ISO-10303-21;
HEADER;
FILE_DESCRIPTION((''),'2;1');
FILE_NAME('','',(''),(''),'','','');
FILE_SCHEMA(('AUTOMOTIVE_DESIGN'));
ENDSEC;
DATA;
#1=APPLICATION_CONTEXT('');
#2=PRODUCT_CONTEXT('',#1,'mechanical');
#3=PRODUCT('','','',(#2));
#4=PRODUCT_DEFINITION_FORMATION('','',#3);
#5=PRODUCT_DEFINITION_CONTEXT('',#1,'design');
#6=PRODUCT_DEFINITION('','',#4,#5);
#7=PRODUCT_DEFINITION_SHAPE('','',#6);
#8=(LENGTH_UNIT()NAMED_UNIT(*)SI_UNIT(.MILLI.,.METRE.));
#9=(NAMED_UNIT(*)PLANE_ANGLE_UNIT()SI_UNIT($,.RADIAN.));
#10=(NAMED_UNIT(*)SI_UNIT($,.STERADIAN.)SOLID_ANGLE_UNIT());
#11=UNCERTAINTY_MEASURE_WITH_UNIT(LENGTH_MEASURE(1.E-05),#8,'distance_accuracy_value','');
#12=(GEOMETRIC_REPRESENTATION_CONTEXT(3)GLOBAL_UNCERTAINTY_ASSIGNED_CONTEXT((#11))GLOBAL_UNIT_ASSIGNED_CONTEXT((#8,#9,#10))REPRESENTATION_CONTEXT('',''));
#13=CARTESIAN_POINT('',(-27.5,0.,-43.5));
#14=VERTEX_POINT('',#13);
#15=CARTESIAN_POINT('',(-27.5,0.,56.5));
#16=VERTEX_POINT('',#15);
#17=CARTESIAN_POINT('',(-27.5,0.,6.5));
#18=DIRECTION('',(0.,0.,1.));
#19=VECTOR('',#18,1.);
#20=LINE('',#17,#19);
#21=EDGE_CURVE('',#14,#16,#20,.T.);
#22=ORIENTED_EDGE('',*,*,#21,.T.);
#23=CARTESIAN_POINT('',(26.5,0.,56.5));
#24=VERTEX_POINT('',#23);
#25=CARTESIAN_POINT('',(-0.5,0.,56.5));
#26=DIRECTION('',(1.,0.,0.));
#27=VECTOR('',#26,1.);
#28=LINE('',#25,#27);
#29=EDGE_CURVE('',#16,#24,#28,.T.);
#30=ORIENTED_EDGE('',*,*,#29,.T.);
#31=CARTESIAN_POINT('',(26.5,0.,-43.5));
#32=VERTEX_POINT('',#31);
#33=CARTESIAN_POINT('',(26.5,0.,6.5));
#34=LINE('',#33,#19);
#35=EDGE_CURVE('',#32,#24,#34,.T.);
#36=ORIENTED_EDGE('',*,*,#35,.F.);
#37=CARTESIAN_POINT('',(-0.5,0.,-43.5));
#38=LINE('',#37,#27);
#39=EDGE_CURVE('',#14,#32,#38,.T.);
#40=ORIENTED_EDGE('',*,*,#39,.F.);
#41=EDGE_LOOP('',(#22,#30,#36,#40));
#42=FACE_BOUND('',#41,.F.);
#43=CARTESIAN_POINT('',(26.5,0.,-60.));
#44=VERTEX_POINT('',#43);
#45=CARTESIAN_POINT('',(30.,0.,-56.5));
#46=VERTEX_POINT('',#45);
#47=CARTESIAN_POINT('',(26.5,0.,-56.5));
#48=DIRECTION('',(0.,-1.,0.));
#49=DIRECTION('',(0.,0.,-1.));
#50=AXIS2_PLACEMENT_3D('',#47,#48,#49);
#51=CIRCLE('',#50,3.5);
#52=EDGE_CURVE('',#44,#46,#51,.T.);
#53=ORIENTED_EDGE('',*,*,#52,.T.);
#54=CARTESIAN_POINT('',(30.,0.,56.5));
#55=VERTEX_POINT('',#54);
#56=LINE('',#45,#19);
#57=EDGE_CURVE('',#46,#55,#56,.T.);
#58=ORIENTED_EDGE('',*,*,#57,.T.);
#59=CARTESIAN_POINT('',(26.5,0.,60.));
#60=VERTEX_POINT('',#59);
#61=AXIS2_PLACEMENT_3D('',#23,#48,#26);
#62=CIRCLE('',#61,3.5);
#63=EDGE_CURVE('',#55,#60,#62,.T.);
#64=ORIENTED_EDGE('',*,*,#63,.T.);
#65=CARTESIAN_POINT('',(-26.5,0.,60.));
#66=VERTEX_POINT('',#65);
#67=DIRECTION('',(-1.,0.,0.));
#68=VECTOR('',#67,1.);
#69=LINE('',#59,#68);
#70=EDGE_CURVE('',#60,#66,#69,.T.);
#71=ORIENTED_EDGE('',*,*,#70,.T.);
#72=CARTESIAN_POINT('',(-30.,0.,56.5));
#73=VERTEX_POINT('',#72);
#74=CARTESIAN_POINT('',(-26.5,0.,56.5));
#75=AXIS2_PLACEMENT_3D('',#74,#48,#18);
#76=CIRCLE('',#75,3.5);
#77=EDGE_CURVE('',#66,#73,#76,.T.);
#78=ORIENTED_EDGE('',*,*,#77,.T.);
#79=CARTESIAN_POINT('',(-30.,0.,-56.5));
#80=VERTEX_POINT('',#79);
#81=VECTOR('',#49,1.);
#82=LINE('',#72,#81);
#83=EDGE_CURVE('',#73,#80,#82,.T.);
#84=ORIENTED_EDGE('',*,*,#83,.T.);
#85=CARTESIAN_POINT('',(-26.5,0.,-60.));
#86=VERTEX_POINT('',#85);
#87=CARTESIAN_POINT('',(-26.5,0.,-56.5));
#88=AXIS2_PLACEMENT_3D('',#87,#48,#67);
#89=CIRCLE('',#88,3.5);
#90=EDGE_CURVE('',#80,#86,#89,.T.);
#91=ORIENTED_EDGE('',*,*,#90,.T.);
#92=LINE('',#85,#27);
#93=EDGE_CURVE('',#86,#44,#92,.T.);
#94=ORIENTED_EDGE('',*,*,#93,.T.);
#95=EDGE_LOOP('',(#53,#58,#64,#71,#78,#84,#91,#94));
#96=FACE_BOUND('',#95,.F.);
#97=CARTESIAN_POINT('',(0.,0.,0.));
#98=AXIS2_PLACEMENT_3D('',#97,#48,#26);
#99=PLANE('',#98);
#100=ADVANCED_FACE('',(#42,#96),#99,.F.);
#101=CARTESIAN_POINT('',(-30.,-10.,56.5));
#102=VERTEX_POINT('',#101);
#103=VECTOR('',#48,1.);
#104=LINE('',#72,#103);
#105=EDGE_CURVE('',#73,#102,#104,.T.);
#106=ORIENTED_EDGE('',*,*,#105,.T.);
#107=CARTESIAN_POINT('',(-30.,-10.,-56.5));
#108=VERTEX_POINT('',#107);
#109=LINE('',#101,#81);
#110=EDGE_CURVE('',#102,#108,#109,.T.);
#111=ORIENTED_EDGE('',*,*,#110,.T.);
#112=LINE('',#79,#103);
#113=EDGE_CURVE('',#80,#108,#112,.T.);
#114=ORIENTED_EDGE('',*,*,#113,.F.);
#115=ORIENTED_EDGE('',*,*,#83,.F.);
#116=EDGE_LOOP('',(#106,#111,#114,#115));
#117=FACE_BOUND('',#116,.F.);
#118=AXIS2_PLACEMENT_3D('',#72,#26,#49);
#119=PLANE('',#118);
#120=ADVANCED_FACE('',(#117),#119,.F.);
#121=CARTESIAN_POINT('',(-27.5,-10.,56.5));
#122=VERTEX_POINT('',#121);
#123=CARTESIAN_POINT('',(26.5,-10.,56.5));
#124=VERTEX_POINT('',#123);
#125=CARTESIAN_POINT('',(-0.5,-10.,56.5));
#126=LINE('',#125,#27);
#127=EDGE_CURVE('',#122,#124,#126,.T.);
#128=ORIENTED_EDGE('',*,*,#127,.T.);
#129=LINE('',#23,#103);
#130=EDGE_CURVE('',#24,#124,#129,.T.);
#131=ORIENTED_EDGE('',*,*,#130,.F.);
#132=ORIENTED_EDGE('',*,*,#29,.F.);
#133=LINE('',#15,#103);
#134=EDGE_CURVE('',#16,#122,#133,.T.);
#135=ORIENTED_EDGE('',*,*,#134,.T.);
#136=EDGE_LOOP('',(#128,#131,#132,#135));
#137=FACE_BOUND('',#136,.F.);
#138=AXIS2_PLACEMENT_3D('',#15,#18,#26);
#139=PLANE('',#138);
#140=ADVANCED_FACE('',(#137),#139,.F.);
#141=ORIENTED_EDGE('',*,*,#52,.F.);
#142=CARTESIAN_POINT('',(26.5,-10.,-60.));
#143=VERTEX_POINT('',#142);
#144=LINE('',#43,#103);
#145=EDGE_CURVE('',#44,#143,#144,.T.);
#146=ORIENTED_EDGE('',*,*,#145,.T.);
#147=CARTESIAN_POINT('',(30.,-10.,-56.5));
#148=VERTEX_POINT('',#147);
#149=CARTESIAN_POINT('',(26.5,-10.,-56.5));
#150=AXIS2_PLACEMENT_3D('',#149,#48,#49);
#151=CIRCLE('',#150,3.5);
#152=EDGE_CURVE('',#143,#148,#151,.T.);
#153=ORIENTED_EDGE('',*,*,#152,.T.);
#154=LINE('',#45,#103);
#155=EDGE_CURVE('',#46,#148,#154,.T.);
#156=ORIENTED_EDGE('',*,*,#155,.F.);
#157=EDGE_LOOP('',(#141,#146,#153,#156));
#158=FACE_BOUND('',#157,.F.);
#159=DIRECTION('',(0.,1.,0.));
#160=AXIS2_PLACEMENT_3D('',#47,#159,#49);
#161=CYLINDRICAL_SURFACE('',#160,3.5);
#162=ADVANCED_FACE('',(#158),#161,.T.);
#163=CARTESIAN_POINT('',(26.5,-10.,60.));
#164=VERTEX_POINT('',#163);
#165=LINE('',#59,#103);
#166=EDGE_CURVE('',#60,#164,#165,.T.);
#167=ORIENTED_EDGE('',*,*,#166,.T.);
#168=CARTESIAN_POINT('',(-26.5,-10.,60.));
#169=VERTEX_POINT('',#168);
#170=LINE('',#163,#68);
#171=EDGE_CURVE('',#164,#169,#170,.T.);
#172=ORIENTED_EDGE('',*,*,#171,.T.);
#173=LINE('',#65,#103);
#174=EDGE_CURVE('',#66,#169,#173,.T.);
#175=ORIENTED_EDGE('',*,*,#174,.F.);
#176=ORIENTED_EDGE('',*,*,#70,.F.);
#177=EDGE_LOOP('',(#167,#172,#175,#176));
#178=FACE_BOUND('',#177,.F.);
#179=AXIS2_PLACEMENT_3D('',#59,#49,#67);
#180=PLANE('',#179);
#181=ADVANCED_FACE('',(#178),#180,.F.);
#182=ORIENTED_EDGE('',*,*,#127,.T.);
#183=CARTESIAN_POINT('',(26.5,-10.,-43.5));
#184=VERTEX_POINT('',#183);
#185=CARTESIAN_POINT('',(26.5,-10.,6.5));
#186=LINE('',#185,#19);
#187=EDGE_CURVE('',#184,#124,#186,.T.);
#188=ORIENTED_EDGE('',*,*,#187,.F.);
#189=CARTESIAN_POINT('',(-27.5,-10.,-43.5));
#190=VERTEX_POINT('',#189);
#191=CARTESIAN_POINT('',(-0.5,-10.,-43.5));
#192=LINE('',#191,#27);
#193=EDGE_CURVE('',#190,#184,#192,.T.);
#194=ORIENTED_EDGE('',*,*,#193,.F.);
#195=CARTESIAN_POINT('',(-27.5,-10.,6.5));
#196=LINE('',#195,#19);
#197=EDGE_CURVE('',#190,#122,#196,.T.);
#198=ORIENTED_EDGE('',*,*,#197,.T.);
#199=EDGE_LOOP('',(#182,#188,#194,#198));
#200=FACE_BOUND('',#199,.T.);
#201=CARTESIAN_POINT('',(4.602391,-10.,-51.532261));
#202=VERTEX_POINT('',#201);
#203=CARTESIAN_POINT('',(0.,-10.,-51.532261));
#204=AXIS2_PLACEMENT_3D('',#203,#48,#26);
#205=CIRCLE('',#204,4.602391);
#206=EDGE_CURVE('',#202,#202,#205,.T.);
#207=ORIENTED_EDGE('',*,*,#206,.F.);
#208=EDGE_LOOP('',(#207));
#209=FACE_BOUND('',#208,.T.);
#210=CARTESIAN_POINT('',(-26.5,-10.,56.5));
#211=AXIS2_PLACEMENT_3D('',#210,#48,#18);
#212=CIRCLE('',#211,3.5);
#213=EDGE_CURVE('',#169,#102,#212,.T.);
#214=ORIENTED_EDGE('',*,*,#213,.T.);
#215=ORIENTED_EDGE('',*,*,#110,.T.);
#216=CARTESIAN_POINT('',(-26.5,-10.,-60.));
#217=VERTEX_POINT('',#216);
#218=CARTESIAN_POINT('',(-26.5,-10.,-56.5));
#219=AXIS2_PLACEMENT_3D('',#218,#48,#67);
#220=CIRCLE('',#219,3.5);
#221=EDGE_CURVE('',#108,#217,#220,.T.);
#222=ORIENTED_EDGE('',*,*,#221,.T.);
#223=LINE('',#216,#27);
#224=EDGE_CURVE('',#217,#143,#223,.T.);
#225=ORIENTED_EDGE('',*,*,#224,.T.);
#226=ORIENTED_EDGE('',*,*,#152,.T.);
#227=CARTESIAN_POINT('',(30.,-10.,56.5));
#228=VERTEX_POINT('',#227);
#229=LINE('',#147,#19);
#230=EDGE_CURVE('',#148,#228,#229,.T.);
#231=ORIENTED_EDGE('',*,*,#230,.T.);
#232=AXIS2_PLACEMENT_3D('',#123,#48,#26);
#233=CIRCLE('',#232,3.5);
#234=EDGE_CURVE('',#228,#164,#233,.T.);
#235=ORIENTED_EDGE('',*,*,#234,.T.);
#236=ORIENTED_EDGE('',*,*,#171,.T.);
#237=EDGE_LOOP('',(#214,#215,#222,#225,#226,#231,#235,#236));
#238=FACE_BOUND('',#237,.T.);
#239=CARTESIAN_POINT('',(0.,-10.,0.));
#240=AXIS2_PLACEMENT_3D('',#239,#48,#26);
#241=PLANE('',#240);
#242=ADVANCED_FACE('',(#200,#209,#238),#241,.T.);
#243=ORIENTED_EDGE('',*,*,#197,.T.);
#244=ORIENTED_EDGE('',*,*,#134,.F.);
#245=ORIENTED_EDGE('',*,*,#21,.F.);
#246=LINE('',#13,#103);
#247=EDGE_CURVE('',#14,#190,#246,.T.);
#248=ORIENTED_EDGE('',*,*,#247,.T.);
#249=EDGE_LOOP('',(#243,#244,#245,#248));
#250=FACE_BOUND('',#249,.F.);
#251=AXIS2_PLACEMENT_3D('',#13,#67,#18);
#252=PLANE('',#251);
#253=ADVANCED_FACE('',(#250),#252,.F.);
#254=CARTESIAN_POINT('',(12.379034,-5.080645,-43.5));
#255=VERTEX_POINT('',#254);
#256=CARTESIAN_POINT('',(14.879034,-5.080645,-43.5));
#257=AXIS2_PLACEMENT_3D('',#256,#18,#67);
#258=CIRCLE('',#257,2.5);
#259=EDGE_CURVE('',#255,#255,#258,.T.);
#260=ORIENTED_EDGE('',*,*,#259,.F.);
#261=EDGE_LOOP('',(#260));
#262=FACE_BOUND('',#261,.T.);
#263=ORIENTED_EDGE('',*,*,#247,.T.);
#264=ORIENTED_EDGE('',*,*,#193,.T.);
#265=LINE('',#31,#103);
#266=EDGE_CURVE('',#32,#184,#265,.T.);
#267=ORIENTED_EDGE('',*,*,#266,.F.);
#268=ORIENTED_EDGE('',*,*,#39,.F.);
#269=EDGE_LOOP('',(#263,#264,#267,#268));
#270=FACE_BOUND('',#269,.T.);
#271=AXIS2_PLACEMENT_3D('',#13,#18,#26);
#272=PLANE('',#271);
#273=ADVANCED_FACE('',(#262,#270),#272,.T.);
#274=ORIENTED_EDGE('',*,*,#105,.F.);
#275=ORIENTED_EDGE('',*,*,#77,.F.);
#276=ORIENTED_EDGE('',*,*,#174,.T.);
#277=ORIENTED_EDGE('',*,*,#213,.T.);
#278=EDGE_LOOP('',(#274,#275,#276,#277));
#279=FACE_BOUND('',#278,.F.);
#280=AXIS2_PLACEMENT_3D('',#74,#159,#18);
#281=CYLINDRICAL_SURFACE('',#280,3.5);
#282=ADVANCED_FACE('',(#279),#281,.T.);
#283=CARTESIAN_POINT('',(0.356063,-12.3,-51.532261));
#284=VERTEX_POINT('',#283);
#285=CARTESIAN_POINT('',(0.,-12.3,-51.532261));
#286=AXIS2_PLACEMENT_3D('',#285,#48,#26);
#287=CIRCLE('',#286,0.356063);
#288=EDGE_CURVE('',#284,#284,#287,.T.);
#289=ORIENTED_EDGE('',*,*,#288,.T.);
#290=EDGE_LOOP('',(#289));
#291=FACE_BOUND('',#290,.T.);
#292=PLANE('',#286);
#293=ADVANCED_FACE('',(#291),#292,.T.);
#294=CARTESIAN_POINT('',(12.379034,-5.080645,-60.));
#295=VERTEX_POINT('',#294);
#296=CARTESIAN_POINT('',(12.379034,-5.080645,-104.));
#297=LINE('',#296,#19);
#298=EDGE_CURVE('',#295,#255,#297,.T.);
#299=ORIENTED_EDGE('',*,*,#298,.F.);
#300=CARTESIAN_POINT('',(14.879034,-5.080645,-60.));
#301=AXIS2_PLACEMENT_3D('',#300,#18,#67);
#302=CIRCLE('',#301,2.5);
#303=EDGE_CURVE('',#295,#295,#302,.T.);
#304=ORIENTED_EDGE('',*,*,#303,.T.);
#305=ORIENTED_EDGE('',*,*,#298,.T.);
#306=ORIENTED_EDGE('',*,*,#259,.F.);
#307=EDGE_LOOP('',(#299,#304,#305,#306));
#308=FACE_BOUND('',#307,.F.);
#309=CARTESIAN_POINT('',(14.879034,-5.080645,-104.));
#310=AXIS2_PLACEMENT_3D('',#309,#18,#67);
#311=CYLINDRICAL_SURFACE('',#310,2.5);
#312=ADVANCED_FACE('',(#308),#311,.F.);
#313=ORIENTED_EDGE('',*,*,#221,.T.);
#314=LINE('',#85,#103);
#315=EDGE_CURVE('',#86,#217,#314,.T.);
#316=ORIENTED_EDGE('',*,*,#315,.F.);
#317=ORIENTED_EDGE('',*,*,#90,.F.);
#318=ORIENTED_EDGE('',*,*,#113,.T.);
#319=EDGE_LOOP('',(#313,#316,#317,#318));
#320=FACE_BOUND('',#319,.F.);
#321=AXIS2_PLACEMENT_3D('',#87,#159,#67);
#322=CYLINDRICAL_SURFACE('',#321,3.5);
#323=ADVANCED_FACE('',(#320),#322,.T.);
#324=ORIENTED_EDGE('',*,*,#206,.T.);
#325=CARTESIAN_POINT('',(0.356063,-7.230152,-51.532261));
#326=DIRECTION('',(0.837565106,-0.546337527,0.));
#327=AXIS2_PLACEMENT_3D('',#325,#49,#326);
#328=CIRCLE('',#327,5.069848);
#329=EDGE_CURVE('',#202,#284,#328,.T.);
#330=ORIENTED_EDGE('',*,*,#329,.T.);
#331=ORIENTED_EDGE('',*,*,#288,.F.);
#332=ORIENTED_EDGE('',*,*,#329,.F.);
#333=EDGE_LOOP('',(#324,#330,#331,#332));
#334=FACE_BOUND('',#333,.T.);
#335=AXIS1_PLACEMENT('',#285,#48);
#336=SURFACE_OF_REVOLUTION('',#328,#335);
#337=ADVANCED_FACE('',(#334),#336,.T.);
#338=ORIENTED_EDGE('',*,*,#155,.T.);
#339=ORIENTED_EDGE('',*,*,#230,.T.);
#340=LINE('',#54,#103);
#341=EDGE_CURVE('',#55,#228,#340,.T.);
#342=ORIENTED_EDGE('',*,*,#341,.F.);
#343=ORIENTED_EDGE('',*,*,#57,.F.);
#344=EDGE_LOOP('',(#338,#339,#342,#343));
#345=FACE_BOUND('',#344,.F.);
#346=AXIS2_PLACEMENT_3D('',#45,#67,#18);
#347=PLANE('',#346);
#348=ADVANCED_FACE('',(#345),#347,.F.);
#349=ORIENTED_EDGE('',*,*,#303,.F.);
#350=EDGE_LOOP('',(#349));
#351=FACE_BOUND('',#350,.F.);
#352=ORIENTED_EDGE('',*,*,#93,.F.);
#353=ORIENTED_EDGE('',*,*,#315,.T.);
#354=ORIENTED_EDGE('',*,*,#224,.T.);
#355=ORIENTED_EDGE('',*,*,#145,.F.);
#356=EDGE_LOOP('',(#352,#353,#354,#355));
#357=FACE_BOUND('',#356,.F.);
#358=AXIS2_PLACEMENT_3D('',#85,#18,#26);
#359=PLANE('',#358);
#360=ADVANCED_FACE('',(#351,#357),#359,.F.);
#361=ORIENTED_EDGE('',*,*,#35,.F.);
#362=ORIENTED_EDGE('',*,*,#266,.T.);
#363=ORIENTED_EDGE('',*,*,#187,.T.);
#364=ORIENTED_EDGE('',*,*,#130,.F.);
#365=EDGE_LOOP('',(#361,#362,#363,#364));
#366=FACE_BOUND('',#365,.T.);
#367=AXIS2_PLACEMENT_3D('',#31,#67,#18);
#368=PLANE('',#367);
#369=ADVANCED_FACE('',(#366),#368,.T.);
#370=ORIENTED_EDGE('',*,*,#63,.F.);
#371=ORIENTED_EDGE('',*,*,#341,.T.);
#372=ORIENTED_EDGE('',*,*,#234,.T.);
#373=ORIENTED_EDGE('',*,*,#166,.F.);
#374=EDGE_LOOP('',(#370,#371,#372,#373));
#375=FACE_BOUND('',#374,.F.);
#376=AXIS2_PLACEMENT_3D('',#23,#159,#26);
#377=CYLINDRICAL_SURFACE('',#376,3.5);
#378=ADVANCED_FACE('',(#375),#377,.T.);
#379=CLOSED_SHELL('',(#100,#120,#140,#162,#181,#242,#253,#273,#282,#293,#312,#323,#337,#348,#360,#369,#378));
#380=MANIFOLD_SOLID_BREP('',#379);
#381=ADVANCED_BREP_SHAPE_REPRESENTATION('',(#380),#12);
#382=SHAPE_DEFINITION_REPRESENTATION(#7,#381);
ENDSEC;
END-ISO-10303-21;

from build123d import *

# Parameters (mm, degrees)
F0_W     = 54
F0_H     = 100
F1_DEPTH = 10
F2_R     = 4.602391418
F3_DEPTH = 2.3
F6_D     = 5
F6_DEPTH = 44
F6_TIP   = 1.5021515476


# Not quite as in the source:
# - a fillet or chamfer that OpenCascade refuses, or shapes differently, is made with other operations: its cross-section is extruded or revolved along the edge and cut away or added


with BuildPart() as f1:
    # F0 (on Front) → F1 (new body)
    with BuildSketch(Plane.XZ):
        with BuildLine():
            ThreePointArc((30, 56.5), (28.9748737342, 58.9748737342), (26.5, 60))
            Line((26.5, 60), (-26.5, 60))
            ThreePointArc((-26.5, 60), (-28.9748737342, 58.9748737342), (-30, 56.5))
            Line((-30, 56.5), (-30, -56.5))
            ThreePointArc((-30, -56.5), (-28.9748737342, -58.9748737342), (-26.5, -60))
            Line((-26.5, -60), (26.5, -60))
            ThreePointArc((26.5, -60), (28.9748737342, -58.9748737342), (30, -56.5))
            Line((30, -56.5), (30, 56.5))
        make_face()
        with Locations((-0.5, 6.5)):
            Rectangle(F0_W, F0_H, mode=Mode.SUBTRACT)
    extrude(amount=F1_DEPTH)

    # F2 (on face) → F3 (join)
    with BuildSketch(Plane.XZ.offset(10)):
        with Locations((0, -51.5322610736)):
            Circle(F2_R)
    extrude(amount=F3_DEPTH)

    # F4: fillet of radius 5.069848481 on 1 edges, made by hand

    # F4_s1 → F4_t2 (revolve, cut)
    with BuildSketch(Plane.XY.offset(-51.5322610736)):
        with BuildLine():
            ThreePointArc((4.602391418, -10), (2.7706699872, -11.6880700767), (0.356063238, -12.3))
            Line((0.356063238, -12.3), (4.602391418, -12.3))
            Line((4.602391418, -12.3), (4.602391418, -10))
        make_face()
    revolve(axis=Axis((0, -12.3, -51.5322610736), (0, -1, 0)), mode=Mode.SUBTRACT)

    # F6
    with Locations(Plane(origin=(0, 0, -60), x_dir=(1, 0, 0), z_dir=(0, 0, -1))):
        with Locations((14.8790339008, 5.0806454383)):
            Hole(F6_D / 2, depth=F6_DEPTH)
            with Locations((0, 0, -(F6_DEPTH + F6_TIP / 2))):  # 118° drill point
                Cone(0, F6_D / 2, F6_TIP, mode=Mode.SUBTRACT)


solid = f1.part
